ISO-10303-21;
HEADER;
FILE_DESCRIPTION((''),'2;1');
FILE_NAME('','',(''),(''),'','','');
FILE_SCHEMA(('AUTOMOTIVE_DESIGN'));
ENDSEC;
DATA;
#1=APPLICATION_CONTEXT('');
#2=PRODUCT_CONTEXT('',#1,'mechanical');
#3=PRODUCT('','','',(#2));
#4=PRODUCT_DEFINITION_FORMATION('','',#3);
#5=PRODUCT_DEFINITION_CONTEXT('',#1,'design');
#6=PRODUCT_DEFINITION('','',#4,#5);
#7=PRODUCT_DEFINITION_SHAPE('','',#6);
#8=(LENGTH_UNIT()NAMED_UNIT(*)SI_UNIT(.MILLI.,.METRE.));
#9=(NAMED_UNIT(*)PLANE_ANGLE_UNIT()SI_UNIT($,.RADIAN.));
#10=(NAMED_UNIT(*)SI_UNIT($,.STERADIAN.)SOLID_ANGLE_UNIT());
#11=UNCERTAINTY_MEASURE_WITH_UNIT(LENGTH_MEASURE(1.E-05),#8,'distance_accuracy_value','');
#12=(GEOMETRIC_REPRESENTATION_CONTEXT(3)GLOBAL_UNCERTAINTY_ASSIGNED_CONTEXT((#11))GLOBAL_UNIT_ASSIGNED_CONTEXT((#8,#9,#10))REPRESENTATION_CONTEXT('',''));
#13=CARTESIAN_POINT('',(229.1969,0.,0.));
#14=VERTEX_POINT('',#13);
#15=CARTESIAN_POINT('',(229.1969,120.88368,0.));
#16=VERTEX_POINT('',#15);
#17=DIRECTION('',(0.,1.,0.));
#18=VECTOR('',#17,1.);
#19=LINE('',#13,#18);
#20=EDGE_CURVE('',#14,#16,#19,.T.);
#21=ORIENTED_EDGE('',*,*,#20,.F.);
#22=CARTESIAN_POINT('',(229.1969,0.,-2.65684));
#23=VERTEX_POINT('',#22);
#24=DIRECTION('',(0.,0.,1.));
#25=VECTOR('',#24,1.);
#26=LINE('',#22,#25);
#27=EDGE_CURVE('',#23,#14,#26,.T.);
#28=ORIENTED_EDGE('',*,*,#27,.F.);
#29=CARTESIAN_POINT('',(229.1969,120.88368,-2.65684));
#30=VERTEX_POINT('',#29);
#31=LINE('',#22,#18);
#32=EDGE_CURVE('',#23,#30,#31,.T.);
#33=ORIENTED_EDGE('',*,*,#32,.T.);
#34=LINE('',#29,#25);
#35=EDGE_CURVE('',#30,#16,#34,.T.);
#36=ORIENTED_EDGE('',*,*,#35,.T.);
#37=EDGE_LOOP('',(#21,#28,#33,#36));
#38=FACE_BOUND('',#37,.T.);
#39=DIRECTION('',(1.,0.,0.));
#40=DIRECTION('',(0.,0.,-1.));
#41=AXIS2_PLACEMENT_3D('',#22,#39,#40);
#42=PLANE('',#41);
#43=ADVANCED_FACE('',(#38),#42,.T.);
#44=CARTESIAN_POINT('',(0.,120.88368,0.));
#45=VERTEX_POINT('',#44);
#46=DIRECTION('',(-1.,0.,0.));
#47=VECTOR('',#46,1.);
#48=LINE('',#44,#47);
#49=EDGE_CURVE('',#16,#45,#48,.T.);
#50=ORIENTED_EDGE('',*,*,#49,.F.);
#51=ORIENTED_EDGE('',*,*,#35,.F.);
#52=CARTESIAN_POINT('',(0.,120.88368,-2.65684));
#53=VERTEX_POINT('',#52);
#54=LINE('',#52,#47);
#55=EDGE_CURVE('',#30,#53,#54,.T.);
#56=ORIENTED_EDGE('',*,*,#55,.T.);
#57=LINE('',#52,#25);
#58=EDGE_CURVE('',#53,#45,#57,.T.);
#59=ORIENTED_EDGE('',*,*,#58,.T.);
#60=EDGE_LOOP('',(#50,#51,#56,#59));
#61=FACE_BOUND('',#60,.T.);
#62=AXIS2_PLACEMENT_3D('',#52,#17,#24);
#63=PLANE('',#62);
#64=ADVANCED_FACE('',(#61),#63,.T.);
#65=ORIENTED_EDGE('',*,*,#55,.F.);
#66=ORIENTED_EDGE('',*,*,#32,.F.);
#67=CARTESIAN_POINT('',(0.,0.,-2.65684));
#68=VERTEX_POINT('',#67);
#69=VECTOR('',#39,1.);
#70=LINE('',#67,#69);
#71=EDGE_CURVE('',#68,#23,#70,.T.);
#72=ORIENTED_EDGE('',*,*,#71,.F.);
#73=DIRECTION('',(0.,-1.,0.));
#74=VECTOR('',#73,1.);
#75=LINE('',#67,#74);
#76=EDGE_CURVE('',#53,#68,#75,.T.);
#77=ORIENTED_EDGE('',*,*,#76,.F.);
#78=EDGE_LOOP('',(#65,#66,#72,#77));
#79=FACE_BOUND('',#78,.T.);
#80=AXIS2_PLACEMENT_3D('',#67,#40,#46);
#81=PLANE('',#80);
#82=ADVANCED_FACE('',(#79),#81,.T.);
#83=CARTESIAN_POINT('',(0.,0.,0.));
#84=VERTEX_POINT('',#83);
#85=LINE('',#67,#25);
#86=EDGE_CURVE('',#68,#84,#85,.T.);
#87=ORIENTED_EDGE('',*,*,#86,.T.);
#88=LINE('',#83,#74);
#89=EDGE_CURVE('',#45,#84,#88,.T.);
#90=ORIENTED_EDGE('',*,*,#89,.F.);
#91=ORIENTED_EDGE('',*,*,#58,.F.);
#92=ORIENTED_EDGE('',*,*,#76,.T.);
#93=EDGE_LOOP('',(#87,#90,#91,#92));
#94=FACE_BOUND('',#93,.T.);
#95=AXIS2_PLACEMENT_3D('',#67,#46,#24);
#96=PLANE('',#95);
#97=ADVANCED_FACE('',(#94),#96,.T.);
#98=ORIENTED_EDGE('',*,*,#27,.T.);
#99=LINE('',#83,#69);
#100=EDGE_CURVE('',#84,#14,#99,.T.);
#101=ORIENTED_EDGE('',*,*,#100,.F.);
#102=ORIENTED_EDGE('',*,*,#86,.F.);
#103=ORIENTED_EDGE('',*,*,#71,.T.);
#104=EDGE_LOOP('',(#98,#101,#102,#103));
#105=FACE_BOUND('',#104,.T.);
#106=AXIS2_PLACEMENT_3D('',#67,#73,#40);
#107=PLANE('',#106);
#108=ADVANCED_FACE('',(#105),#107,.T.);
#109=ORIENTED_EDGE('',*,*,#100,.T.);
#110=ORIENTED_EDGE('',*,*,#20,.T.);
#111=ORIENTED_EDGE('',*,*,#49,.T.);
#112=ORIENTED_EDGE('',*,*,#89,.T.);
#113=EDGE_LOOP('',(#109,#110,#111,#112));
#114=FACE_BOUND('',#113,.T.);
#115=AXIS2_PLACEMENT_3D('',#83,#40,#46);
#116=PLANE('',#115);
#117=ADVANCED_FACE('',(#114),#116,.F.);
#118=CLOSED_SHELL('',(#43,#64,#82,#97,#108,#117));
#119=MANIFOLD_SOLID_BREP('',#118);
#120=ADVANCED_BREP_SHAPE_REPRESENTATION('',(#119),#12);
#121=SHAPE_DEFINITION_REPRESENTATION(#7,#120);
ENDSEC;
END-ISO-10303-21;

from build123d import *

# Parameters (mm, degrees)
SKETCH1_W          = 229.1969
SKETCH1_H          = 120.88368
BASE_FLANGE1_DEPTH = 2.65684


# Sheet-metal steps are written as plain solids
with BuildPart() as part:
    # Sketch1 → Base-Flange1 (new body)
    with BuildSketch(Plane.XY):
        with Locations((114.59845, 60.44184)):
            Rectangle(SKETCH1_W, SKETCH1_H)
    extrude(amount=-BASE_FLANGE1_DEPTH)


solid = part.part
